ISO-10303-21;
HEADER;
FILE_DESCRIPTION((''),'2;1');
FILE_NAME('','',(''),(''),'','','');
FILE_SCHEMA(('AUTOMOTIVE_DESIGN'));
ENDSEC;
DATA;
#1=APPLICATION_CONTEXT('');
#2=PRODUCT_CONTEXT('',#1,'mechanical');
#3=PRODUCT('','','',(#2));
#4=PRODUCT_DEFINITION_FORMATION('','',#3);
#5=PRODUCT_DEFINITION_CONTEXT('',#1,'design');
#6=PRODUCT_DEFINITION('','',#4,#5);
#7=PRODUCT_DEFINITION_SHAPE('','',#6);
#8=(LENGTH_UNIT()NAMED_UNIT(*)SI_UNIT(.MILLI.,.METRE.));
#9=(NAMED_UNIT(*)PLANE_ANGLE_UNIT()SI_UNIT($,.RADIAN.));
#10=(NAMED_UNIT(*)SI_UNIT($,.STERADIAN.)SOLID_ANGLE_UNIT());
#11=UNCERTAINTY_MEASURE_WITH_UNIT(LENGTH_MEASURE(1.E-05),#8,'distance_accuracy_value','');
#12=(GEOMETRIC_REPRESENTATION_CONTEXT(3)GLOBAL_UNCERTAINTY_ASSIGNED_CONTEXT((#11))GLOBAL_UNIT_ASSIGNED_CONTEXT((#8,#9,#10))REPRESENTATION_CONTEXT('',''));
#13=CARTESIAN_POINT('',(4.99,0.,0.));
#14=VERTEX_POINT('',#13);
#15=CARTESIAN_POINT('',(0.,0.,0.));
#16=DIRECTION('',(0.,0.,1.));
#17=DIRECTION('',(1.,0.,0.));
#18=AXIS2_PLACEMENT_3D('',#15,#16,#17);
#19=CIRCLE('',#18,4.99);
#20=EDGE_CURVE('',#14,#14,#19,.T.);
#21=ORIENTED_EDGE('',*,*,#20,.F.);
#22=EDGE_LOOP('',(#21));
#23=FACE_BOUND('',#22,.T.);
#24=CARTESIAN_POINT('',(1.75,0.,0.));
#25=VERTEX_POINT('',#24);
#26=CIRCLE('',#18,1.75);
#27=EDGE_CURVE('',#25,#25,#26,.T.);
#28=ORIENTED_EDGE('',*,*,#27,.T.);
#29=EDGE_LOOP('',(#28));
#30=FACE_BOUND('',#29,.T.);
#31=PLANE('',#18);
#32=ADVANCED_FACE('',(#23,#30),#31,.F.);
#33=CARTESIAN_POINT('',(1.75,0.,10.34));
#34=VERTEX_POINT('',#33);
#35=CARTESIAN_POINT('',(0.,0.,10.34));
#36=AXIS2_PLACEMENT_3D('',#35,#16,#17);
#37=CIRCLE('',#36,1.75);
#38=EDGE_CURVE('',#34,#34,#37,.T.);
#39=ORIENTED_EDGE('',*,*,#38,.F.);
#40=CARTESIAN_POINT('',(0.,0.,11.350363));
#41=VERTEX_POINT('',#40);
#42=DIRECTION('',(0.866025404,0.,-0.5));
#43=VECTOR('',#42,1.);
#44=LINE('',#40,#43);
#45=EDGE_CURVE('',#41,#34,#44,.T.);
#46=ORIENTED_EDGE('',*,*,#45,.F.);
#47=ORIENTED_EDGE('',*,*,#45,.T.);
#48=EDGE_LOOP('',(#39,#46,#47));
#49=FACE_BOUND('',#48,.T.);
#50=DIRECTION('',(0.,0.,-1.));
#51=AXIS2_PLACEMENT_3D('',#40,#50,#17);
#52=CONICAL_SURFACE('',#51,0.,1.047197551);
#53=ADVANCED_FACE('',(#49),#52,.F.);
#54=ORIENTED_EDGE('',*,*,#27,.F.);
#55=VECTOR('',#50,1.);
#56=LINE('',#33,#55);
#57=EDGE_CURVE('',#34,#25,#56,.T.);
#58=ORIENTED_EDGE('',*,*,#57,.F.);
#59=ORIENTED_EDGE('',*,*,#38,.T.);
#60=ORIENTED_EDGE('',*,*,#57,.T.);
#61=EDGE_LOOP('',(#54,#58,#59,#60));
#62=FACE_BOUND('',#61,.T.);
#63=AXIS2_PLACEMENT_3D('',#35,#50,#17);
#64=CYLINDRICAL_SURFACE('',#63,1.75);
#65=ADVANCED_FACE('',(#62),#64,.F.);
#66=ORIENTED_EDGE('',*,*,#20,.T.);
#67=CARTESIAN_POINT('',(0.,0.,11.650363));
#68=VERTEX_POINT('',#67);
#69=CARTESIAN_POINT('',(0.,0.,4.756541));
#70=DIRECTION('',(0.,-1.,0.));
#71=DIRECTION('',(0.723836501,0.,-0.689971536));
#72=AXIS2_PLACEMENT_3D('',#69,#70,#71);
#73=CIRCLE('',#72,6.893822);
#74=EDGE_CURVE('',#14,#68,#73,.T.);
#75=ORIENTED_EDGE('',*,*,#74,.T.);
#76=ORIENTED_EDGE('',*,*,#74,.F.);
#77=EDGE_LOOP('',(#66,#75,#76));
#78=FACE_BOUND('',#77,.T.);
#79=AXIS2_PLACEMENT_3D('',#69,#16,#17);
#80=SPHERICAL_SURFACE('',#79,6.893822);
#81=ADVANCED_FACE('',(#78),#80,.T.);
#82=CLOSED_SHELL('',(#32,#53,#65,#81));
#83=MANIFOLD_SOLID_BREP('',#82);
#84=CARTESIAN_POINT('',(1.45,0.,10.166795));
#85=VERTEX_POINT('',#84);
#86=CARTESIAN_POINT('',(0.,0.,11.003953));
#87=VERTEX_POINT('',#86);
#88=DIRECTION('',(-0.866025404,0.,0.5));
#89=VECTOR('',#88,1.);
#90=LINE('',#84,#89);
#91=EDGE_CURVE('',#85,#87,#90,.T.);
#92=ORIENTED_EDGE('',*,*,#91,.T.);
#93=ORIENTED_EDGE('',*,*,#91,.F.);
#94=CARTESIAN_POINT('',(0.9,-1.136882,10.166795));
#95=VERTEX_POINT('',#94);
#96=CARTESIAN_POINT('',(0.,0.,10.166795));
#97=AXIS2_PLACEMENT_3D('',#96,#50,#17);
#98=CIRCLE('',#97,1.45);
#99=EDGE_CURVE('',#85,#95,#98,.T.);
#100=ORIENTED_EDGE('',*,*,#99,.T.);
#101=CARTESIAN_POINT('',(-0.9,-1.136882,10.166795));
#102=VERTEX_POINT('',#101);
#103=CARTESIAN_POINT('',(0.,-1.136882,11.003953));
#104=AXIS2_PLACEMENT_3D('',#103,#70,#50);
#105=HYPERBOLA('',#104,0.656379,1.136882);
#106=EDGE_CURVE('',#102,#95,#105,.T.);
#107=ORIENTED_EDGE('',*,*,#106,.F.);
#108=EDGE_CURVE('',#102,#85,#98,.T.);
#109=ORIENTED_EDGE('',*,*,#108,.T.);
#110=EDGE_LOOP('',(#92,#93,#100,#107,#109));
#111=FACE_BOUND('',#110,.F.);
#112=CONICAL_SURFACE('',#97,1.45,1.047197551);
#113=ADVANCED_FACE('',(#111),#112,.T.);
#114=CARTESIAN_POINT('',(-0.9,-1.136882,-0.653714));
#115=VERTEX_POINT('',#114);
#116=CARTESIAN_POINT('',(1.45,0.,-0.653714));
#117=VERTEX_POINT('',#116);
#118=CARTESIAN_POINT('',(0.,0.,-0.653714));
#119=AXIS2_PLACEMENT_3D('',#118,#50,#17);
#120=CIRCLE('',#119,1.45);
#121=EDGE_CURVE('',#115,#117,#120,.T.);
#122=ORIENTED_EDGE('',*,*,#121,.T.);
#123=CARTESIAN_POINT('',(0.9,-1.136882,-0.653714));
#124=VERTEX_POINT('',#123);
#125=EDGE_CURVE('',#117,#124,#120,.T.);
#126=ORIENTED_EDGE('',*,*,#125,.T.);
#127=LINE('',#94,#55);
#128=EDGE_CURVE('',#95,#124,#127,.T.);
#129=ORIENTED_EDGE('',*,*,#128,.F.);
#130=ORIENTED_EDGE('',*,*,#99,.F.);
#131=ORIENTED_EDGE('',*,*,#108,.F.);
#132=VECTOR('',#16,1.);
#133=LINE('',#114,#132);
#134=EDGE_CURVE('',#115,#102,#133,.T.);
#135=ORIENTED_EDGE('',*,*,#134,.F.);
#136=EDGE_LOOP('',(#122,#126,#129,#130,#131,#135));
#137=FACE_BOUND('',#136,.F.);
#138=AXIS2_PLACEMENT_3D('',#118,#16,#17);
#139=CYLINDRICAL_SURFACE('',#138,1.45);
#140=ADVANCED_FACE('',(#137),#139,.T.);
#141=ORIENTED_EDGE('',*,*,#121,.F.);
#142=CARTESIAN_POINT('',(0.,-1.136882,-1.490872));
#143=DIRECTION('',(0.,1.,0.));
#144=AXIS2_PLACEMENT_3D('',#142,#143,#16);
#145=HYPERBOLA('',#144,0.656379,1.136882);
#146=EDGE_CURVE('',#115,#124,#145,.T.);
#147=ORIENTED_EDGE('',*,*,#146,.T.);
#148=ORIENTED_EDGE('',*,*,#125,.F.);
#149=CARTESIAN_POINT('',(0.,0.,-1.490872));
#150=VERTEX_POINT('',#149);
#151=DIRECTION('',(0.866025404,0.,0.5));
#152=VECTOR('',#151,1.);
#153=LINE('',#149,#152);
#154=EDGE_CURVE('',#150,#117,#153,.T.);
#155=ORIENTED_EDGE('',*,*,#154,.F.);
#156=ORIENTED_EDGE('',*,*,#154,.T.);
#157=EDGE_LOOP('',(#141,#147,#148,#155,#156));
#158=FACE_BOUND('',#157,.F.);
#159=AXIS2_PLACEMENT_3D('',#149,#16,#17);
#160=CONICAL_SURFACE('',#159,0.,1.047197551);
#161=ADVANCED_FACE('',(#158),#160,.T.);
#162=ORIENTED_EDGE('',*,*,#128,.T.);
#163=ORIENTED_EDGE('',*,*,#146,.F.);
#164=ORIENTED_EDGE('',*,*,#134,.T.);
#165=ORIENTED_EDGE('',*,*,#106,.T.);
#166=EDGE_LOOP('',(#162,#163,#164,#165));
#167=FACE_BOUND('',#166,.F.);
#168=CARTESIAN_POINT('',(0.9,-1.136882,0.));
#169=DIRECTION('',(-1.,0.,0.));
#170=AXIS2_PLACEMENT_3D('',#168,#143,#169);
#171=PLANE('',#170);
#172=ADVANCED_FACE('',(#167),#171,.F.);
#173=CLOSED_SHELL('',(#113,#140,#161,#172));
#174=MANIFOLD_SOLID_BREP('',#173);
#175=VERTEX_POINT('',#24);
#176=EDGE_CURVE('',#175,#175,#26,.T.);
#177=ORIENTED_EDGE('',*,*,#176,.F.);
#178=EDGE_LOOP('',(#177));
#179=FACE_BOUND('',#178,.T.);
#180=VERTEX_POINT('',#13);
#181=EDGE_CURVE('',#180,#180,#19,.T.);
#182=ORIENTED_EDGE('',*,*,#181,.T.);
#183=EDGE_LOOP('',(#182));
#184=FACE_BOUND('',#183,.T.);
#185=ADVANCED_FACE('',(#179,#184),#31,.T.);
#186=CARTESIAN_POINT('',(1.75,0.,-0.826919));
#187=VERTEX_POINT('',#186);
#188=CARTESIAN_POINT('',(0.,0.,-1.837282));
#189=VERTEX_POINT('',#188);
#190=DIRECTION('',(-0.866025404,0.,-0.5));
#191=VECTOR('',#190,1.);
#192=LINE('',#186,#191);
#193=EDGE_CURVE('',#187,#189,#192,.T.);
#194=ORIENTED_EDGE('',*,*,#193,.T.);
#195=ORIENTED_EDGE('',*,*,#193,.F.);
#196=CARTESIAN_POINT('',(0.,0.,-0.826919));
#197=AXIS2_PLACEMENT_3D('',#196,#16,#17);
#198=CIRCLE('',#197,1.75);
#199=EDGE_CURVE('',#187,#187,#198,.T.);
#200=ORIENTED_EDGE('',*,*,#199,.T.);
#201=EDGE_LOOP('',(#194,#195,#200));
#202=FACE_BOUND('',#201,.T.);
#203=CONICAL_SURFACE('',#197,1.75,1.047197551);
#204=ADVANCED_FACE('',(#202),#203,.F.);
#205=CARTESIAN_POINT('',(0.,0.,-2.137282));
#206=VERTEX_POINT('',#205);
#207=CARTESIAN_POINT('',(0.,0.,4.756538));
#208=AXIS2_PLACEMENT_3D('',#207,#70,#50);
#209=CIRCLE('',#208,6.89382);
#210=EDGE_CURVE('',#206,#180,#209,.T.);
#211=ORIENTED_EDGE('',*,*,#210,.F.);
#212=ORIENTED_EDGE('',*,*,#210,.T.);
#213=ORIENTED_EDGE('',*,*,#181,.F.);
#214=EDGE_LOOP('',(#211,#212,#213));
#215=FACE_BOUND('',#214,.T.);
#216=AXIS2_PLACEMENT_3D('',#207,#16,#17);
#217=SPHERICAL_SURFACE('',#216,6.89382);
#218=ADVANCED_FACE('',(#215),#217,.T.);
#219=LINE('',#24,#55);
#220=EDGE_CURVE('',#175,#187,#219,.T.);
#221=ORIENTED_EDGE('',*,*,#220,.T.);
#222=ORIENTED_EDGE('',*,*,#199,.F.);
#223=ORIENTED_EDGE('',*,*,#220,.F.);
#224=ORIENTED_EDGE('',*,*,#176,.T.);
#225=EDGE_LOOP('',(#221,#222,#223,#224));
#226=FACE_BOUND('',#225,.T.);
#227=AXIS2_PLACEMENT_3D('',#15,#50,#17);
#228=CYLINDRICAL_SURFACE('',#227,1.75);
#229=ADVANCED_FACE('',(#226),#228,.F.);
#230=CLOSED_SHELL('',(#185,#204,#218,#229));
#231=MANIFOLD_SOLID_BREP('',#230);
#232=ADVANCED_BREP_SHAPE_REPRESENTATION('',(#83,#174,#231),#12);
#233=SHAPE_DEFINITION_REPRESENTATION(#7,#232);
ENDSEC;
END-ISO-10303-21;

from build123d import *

# Parameters (mm, degrees)
F5_DEPTH      = 2.138281953
F5_DEPTH_BACK = 11.6513629711


with BuildPart() as f1:
    # F0 (on Front) → F1 (revolve)
    with BuildSketch(Plane.XZ):
        with BuildLine():
            Line((1.75, 0), (4.99, 0))
            ThreePointArc((4.99, 0), (6.3370154126, 7.4707660014), (0, 11.6503629711))
            Line((0, 11.6503629711), (0, 11.3503629711))
            Line((0, 11.3503629711), (1.75, 10.34))
            Line((1.75, 10.34), (1.75, 0))
        make_face()
    revolve(axis=Axis((0, 0, 4.4251814855), (0, 0, 1)))


with BuildPart() as f2:
    # F0 (on Front) → F2 (revolve)
    with BuildSketch(Plane.XZ):
        with BuildLine():
            ThreePointArc((0, -2.137281953), (2.7142252185, -1.5804751024), (4.99, 0))
            Line((4.99, 0), (1.75, 0))
            Line((1.75, 0), (1.75, -0.8269189819))
            Line((1.75, -0.8269189819), (0, -1.837281953))
            Line((0, -1.837281953), (0, -2.137281953))
        make_face()
    revolve(axis=Axis((0, 0, 4.4251814855), (0, 0, 1)))


with BuildPart() as f3:
    # F0 (on Front) → F3 (revolve)
    with BuildSketch(Plane.XZ):
        Polygon((1.45, -0.6537139012), (1.45, 0), (1.45, 10.1667949192), (0, 11.0039528096), (0, -1.4908717915), align=None)
    revolve(axis=Axis((0, 0, 4.756540509), (0, 0, -1)))

    # F4 (on Top) → F5 (cut, two sides)
    with BuildSketch(Plane.XY) as f5_sk:
        with BuildLine():
            Line((0.9, -1.1368817001), (-0.9, -1.1368817001))
            ThreePointArc((-0.9, -1.1368817001), (0, -1.45), (0.9, -1.1368817001))
        make_face()
    extrude(amount=-F5_DEPTH, mode=Mode.SUBTRACT)
    extrude(f5_sk.sketch, amount=F5_DEPTH_BACK, mode=Mode.SUBTRACT)


solid = Compound([f1.part, f2.part, f3.part])
